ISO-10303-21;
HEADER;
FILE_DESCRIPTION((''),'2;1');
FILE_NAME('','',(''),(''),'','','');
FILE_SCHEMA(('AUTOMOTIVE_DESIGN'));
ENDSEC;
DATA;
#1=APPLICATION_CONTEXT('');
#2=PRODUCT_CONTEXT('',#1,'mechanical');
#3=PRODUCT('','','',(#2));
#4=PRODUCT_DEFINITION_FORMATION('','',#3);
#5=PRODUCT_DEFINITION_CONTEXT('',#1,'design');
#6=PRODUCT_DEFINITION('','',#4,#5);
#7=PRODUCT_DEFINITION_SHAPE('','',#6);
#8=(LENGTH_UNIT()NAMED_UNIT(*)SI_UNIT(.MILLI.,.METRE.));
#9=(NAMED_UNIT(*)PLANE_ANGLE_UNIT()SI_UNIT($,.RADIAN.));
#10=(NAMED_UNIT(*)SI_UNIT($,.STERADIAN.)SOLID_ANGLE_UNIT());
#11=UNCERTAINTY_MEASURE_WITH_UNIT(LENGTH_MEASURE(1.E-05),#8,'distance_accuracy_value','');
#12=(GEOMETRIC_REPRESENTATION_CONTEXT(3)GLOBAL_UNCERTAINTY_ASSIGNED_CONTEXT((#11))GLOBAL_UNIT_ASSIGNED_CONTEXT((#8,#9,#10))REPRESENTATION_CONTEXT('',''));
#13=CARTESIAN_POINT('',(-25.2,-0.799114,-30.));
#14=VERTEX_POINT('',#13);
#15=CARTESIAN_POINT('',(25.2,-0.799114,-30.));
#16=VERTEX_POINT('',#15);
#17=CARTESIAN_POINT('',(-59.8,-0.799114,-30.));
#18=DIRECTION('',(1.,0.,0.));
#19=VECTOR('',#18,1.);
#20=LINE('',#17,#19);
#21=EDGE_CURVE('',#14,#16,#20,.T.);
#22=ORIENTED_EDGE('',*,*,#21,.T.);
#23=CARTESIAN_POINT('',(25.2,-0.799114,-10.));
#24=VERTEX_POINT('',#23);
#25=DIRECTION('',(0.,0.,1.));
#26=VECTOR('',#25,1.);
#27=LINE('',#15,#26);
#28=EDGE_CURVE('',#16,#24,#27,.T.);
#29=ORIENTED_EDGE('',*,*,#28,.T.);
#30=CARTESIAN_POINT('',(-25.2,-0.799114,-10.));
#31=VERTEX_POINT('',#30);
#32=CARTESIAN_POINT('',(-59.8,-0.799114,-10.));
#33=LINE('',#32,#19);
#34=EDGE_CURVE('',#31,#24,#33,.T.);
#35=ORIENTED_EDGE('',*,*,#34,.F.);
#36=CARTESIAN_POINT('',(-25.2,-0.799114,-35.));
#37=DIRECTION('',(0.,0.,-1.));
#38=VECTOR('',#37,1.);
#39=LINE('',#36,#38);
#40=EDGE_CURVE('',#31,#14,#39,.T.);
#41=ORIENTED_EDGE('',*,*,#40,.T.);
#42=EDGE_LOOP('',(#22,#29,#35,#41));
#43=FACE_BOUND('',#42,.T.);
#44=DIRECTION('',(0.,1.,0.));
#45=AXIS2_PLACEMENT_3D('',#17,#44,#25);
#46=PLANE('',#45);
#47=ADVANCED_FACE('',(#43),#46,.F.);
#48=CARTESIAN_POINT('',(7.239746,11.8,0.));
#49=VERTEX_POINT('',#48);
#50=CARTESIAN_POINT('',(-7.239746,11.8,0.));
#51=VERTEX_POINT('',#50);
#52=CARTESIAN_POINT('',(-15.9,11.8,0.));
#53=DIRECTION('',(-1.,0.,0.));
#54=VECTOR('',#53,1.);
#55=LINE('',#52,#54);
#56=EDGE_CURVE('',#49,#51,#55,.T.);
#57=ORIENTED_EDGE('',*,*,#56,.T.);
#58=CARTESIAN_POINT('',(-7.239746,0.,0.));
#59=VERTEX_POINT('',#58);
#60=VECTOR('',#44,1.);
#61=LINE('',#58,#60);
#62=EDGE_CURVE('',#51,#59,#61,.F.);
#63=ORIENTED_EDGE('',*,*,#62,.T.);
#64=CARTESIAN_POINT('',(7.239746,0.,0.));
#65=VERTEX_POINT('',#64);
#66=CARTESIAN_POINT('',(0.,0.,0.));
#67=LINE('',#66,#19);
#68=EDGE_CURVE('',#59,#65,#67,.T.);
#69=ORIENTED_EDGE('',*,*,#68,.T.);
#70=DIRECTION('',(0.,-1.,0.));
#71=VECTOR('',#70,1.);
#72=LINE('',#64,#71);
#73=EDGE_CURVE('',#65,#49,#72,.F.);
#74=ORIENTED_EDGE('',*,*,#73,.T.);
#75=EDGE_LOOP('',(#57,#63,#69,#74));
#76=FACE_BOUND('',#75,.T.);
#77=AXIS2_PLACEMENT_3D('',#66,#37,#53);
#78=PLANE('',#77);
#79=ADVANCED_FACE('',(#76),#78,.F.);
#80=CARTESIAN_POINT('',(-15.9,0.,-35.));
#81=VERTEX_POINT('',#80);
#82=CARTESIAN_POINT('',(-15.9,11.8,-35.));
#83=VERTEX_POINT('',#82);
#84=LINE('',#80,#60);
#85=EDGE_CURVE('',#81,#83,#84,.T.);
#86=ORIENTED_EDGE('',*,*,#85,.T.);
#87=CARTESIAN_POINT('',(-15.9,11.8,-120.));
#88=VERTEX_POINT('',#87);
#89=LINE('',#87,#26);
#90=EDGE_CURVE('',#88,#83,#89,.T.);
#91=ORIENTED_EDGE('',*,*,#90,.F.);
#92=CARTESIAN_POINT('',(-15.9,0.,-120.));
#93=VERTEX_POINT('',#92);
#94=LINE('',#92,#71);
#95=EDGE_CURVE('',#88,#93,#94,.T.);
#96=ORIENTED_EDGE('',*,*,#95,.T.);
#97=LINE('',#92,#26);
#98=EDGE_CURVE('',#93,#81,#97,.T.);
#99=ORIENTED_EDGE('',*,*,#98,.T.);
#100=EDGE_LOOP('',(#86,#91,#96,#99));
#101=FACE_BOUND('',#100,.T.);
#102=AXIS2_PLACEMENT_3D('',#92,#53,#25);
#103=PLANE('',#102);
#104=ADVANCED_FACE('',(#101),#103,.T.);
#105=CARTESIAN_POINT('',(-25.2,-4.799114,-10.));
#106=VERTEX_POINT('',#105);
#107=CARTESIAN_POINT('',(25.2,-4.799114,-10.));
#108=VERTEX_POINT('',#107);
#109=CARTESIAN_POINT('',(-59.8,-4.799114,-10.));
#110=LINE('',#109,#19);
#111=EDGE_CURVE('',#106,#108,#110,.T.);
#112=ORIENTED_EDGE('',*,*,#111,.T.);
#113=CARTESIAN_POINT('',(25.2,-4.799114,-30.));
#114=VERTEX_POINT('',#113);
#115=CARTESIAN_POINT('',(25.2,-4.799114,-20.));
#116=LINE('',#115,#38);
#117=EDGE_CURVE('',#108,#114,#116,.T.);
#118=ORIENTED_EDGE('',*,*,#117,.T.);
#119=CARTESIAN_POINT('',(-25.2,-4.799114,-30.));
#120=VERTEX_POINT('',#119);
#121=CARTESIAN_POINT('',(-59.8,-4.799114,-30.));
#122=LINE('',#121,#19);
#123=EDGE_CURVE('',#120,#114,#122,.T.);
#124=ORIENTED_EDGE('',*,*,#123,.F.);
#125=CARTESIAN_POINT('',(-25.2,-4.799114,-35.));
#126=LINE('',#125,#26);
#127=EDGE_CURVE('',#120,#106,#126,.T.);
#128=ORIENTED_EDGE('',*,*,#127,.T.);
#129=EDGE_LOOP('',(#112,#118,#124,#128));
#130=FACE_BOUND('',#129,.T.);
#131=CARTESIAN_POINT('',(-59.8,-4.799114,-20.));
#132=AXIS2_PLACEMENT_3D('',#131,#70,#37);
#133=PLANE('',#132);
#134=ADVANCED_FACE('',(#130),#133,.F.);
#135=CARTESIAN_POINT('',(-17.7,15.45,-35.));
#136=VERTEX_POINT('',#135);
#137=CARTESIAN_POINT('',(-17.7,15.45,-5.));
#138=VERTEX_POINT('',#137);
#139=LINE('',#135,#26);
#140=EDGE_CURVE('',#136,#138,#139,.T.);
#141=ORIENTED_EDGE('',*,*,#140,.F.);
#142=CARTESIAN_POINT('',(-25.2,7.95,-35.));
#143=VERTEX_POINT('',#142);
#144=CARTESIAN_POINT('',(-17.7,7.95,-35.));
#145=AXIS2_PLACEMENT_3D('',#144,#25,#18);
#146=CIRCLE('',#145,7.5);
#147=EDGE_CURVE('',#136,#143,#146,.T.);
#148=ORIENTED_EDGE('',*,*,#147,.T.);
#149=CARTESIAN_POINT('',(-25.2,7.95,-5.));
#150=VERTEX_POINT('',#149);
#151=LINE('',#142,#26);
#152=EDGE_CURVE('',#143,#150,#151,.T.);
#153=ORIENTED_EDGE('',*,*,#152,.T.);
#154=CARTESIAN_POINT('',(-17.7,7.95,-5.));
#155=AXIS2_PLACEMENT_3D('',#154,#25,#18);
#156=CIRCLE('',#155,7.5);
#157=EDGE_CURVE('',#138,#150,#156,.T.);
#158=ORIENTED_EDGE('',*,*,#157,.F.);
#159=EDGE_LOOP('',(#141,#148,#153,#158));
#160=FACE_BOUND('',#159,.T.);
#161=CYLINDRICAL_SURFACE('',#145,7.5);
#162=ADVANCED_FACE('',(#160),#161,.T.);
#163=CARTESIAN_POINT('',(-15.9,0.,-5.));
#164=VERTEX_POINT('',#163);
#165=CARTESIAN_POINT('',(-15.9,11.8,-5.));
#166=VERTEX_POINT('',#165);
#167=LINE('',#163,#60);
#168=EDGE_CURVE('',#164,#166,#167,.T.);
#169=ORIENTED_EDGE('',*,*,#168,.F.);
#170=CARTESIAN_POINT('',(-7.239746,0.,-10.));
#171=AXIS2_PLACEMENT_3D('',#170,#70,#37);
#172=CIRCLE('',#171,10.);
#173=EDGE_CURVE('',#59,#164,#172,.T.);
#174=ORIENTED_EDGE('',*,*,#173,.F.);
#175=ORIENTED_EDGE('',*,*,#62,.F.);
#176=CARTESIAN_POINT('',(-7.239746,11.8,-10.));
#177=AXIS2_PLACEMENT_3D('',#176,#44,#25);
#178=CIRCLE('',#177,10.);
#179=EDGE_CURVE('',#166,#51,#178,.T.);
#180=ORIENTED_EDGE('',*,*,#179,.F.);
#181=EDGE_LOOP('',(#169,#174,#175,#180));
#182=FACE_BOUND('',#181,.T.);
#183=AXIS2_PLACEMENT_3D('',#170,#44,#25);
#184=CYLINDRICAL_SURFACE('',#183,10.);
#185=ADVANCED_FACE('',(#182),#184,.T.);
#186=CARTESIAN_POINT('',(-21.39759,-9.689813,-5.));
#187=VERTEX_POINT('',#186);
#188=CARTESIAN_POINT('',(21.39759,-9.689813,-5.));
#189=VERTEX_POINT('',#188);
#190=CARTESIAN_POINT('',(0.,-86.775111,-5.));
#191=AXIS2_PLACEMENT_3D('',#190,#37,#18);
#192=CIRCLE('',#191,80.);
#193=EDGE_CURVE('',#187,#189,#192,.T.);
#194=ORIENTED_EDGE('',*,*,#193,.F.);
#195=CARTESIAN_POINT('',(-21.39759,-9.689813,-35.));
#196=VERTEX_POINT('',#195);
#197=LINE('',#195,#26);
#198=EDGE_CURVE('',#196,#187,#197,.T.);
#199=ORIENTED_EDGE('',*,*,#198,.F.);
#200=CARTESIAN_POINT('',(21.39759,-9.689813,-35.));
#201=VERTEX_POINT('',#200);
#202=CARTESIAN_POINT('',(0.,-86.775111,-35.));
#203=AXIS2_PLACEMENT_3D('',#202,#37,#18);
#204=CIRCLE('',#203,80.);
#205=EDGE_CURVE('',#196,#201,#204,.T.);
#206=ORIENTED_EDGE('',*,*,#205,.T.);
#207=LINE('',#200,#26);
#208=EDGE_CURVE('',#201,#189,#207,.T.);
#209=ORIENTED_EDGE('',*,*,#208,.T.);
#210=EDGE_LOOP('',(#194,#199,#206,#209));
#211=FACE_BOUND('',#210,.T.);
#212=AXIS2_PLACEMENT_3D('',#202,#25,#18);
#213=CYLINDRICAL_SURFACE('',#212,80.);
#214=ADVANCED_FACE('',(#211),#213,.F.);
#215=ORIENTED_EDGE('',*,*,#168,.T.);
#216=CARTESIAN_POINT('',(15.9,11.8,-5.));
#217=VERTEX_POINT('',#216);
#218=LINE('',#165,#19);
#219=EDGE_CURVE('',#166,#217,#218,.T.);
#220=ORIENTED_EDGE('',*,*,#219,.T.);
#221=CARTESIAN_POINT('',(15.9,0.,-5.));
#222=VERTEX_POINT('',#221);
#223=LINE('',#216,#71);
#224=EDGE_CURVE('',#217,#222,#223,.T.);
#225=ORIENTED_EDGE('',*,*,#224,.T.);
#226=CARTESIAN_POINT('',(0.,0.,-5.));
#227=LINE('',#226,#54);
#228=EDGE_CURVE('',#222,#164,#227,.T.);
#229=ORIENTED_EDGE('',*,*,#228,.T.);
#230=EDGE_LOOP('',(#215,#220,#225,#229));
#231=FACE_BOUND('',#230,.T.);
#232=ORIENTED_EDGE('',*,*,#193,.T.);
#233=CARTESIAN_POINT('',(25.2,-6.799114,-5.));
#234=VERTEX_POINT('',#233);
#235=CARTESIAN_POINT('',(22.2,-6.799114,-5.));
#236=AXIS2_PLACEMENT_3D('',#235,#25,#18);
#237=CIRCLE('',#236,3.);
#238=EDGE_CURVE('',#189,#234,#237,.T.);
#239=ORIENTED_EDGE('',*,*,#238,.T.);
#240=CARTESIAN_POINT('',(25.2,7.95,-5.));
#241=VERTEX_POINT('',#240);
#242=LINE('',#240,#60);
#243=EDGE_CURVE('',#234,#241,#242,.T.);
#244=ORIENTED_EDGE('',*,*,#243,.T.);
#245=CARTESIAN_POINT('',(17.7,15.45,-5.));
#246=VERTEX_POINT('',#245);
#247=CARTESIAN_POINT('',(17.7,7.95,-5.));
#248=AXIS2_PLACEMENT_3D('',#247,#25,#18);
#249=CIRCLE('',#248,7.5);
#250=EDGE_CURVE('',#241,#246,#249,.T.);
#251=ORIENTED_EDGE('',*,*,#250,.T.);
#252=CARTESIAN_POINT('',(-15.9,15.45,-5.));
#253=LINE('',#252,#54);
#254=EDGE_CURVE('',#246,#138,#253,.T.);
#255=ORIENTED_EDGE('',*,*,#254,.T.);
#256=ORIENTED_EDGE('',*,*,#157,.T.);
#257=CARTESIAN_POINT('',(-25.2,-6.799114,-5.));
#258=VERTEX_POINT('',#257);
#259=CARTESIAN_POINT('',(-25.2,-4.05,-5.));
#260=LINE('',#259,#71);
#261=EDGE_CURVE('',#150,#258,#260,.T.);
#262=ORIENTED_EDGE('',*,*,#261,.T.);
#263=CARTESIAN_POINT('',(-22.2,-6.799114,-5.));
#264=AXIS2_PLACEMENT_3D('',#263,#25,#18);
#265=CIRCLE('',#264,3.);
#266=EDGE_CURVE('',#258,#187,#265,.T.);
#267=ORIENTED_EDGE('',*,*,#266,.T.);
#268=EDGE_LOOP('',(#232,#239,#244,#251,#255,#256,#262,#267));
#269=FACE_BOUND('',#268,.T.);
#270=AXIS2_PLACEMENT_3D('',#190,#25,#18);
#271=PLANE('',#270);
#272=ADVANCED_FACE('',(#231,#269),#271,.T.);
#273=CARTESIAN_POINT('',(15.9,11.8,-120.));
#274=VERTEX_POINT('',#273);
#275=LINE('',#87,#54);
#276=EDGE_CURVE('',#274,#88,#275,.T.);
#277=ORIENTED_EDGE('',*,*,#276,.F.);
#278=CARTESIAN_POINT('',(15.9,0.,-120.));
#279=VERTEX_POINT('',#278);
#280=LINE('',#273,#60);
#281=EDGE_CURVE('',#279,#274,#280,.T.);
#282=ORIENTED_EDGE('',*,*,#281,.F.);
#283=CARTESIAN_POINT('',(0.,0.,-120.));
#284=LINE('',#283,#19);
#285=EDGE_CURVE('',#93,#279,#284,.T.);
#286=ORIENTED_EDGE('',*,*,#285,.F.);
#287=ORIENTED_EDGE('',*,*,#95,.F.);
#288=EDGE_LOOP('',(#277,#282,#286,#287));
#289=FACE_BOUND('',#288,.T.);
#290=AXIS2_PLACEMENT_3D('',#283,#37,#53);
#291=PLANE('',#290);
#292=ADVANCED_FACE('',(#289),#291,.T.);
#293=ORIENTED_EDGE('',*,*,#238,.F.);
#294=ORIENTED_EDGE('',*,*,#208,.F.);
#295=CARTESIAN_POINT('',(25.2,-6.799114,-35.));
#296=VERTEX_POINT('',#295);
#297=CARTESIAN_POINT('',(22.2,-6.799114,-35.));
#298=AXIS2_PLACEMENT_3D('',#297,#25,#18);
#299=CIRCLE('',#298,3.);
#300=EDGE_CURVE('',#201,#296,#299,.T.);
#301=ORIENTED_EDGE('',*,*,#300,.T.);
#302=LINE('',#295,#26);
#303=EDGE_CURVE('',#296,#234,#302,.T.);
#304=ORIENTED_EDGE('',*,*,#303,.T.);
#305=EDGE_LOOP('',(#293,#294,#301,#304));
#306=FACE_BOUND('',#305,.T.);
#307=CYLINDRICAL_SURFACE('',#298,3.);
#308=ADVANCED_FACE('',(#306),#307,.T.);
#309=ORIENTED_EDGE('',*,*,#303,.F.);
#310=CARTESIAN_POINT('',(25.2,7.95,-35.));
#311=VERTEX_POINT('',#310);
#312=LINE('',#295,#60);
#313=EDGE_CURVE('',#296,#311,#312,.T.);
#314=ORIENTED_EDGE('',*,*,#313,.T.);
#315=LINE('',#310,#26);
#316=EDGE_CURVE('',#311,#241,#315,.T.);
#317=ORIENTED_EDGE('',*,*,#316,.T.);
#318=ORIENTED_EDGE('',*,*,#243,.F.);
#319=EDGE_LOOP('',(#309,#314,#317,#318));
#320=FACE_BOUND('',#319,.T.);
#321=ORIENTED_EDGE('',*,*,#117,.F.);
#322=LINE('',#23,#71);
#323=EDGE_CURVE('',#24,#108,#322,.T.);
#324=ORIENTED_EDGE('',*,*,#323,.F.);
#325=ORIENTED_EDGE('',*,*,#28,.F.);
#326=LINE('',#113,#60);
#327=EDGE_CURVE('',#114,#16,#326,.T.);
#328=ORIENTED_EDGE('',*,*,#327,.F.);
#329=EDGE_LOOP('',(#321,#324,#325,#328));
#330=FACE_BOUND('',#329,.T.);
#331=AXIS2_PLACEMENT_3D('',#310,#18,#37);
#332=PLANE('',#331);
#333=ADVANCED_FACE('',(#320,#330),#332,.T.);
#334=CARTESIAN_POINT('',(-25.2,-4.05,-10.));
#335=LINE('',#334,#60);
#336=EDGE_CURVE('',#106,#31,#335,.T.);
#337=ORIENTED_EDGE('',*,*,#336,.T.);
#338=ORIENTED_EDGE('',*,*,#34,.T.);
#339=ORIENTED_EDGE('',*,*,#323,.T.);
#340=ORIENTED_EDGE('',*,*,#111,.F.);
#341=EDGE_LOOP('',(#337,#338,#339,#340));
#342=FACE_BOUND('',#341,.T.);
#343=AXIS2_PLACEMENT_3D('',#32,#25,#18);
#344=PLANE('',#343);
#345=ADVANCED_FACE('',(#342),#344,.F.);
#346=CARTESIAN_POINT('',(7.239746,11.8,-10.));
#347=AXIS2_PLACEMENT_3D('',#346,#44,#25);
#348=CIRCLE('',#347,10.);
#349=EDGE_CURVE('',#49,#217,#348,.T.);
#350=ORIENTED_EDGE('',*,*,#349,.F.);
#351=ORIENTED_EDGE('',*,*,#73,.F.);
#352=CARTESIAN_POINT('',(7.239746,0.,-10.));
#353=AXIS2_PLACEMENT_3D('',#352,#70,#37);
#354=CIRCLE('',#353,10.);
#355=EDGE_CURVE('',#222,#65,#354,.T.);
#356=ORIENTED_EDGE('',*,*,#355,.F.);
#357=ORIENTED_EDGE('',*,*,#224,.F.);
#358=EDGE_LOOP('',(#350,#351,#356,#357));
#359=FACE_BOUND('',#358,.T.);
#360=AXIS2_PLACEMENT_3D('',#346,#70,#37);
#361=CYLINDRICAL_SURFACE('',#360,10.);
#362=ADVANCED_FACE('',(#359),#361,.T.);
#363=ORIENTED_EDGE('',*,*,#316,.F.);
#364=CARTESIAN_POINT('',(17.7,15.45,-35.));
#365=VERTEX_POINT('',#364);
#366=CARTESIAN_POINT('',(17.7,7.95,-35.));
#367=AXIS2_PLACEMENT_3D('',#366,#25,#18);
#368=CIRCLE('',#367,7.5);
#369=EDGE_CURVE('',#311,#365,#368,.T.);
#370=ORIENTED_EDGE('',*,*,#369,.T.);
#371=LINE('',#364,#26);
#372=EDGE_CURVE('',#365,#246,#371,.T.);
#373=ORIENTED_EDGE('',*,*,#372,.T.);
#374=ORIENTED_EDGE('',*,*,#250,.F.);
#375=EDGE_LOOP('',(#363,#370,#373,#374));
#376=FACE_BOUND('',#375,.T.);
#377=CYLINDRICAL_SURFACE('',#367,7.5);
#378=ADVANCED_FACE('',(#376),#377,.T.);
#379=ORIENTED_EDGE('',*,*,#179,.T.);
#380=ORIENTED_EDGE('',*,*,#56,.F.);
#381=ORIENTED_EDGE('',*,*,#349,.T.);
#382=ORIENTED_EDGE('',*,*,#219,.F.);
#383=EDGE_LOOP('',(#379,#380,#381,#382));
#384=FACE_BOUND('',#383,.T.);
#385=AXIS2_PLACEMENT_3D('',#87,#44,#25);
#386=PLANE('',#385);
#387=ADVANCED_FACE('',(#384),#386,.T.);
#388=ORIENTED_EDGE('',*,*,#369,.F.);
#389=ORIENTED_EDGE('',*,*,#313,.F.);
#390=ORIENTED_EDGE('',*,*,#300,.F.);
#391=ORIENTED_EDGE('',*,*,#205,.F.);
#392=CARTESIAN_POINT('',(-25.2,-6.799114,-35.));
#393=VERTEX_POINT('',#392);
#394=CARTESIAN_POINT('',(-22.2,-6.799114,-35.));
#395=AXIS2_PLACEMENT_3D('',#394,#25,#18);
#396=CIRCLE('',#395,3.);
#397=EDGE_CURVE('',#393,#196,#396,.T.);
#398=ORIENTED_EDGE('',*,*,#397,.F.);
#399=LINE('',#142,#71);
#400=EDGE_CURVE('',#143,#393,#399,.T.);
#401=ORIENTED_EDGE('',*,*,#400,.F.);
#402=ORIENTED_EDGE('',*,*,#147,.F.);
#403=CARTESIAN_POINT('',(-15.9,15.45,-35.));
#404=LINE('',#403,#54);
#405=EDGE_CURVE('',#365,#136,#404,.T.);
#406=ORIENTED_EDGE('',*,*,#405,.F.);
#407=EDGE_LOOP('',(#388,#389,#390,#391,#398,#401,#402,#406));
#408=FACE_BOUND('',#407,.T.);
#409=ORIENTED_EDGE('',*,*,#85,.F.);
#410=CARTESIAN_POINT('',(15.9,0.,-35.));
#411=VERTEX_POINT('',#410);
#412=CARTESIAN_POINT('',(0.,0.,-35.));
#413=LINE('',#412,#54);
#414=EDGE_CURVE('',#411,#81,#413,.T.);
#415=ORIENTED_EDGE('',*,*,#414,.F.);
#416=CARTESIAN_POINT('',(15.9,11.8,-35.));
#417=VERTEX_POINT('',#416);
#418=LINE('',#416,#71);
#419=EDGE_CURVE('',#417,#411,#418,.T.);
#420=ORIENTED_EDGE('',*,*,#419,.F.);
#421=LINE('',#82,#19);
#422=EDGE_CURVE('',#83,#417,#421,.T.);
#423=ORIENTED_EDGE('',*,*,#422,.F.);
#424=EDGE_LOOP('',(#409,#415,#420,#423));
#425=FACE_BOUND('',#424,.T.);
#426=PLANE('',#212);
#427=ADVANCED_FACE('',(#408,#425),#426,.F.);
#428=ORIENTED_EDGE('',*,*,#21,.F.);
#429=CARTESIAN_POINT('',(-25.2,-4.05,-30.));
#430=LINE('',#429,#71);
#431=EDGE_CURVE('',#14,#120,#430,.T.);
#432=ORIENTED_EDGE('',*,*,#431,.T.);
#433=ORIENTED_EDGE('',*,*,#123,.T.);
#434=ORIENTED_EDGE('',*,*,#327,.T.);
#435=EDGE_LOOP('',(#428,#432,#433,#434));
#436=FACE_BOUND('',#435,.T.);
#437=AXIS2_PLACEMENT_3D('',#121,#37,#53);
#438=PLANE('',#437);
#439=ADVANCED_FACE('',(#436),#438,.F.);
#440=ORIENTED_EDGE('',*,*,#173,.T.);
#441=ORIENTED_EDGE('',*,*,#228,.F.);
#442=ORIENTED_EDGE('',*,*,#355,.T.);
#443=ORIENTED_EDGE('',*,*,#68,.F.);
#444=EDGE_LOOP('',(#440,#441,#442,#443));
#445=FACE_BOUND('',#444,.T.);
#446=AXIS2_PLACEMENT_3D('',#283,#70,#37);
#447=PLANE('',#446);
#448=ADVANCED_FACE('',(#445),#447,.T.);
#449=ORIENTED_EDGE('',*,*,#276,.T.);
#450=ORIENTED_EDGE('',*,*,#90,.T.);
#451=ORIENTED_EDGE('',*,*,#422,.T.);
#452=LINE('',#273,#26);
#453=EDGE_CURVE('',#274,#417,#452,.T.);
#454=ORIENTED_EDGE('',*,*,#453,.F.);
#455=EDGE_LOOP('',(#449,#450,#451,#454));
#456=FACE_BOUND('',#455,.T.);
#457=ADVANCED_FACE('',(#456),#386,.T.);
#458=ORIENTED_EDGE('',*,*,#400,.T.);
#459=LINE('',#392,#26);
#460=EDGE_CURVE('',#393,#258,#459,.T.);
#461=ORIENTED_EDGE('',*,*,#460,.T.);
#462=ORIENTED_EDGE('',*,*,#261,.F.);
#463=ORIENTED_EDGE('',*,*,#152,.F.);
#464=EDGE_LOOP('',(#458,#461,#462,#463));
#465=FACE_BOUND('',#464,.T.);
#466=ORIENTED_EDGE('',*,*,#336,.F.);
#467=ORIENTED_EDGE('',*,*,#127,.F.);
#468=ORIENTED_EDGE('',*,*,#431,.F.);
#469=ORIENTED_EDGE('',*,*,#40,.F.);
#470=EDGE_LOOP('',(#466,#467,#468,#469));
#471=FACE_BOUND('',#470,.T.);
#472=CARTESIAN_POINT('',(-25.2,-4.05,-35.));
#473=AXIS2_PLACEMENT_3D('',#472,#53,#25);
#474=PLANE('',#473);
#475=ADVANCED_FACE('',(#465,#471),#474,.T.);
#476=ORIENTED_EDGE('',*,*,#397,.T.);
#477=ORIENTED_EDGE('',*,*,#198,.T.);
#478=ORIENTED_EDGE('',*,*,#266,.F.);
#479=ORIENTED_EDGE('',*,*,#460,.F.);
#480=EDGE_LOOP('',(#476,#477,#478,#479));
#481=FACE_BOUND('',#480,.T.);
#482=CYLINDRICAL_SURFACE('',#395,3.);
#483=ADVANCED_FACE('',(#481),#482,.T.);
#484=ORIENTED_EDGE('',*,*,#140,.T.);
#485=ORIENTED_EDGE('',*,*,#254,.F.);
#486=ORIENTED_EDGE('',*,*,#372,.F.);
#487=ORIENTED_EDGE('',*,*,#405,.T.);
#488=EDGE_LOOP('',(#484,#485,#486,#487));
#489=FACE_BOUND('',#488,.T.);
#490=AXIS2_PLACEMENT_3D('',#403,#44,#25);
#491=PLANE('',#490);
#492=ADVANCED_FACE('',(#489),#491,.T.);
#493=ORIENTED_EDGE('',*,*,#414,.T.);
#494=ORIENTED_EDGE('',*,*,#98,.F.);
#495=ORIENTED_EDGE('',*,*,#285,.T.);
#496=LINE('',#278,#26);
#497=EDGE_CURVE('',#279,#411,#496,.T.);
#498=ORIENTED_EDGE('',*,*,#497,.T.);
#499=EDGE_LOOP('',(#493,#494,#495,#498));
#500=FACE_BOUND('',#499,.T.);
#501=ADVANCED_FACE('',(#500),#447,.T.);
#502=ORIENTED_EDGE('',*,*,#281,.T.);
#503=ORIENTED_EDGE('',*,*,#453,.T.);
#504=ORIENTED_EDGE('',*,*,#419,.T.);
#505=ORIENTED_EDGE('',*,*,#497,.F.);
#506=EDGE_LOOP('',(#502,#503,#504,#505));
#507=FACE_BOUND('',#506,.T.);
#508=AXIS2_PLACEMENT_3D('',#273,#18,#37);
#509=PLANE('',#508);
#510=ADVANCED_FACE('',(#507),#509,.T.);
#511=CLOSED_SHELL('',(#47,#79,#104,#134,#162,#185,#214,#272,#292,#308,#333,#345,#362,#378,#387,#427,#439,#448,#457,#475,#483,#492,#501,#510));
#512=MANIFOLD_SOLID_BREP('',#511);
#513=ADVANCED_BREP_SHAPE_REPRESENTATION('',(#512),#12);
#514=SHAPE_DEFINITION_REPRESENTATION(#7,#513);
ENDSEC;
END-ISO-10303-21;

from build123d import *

# Parameters (mm, degrees)
BOSS_EXTRUDE1_DEPTH = 120
BOSS_EXTRUDE2_DEPTH = 30
FILLET1_R           = 10
FILLET2_R           = 10
CUT_EXTRUDE1_DEPTH  = 85


with BuildPart() as part:
    # Sketch1 → Boss-Extrude1 (new body)
    with BuildSketch(Plane.XY):
        Polygon((0, 0), (15.9, 0), (15.9, 11.8), (-15.9, 11.8), (-15.9, 0), align=None)
    extrude(amount=-BOSS_EXTRUDE1_DEPTH)

    # Sketch2 → Boss-Extrude2 (add)
    with BuildSketch(Plane.XY.offset(-5)):
        with BuildLine():
            Line((-15.9, 15.45), (17.7, 15.45))
            ThreePointArc((17.7, 15.45), (23.003300859, 13.253300859), (25.2, 7.95))
            Line((25.2, 7.95), (25.2, -4.05))
            Line((25.2, -4.05), (25.2, -6.799114346))
            ThreePointArc((25.2, -6.799114346), (24.015595093, -9.187338468), (21.397590361, -9.689813011))
            ThreePointArc((21.397590361, -9.689813011), (0, -6.775110745), (-21.397590361, -9.689813011))
            ThreePointArc((-21.397590361, -9.689813011), (-24.015595093, -9.187338468), (-25.2, -6.799114346))
            Line((-25.2, -6.799114346), (-25.2, -4.05))
            Line((-25.2, -4.05), (-25.2, 7.95))
            ThreePointArc((-25.2, 7.95), (-23.003300859, 13.253300859), (-17.7, 15.45))
            Line((-17.7, 15.45), (-15.9, 15.45))
        make_face()
    extrude(amount=-BOSS_EXTRUDE2_DEPTH)

    # Fillet1
    # the kernel refuses this fillet: 10 mm, written as the material it takes off along each edge
    with BuildSketch(Plane(origin=(15.9, -21.650635095, 0), x_dir=(0, 0, -1), z_dir=(0, 1, 0))) as fillet1_piece_1:
        with BuildLine():
            CenterArc((10, 8.660254038), FILLET1_R, 180, 60)
            Line((0, 8.660254038), (-0.2, 8.660254038))
            Line((-0.2, 8.660254038), (-0.2, 0))
            Line((-0.2, 0), (0, -0.2))
            ThreePointArc((0, -0.2), (2.5, -0.2), (4.9, -0.173205081))
            Line((4.9, -0.173205081), (5, 0))
        make_face()
    extrude(amount=55.101270189, mode=Mode.SUBTRACT)

    # Fillet2
    # the kernel refuses this fillet: 10 mm, written as the material it takes off along each edge
    with BuildSketch(Plane(origin=(-15.9, 33.450635095, 0), x_dir=(1, 0, 0), z_dir=(0, -1, 0))) as fillet2_piece_1:
        with BuildLine():
            CenterArc((8.660254038, -10), FILLET2_R, 90, 60)
            Line((0, -5), (-0.173205081, -4.9))
            ThreePointArc((-0.173205081, -4.9), (-0.2, -2.5), (-0.2, 0))
            Line((-0.2, 0), (0, 0.2))
            Line((0, 0.2), (8.660254038, 0.2))
            Line((8.660254038, 0.2), (8.660254038, 0))
        make_face()
    extrude(amount=55.101270189, mode=Mode.SUBTRACT)

    # Sketch3 → Cut-Extrude1 (cut)
    with BuildSketch(Plane(origin=(25.2, 0, 0), x_dir=(0, 0, -1), z_dir=(1, 0, 0))):
        Polygon((20, -4.799114346), (30, -4.799114346), (30, -0.799114346), (10, -0.799114346), (10, -4.799114346), align=None)
    extrude(amount=-CUT_EXTRUDE1_DEPTH, mode=Mode.SUBTRACT)


solid = part.part
